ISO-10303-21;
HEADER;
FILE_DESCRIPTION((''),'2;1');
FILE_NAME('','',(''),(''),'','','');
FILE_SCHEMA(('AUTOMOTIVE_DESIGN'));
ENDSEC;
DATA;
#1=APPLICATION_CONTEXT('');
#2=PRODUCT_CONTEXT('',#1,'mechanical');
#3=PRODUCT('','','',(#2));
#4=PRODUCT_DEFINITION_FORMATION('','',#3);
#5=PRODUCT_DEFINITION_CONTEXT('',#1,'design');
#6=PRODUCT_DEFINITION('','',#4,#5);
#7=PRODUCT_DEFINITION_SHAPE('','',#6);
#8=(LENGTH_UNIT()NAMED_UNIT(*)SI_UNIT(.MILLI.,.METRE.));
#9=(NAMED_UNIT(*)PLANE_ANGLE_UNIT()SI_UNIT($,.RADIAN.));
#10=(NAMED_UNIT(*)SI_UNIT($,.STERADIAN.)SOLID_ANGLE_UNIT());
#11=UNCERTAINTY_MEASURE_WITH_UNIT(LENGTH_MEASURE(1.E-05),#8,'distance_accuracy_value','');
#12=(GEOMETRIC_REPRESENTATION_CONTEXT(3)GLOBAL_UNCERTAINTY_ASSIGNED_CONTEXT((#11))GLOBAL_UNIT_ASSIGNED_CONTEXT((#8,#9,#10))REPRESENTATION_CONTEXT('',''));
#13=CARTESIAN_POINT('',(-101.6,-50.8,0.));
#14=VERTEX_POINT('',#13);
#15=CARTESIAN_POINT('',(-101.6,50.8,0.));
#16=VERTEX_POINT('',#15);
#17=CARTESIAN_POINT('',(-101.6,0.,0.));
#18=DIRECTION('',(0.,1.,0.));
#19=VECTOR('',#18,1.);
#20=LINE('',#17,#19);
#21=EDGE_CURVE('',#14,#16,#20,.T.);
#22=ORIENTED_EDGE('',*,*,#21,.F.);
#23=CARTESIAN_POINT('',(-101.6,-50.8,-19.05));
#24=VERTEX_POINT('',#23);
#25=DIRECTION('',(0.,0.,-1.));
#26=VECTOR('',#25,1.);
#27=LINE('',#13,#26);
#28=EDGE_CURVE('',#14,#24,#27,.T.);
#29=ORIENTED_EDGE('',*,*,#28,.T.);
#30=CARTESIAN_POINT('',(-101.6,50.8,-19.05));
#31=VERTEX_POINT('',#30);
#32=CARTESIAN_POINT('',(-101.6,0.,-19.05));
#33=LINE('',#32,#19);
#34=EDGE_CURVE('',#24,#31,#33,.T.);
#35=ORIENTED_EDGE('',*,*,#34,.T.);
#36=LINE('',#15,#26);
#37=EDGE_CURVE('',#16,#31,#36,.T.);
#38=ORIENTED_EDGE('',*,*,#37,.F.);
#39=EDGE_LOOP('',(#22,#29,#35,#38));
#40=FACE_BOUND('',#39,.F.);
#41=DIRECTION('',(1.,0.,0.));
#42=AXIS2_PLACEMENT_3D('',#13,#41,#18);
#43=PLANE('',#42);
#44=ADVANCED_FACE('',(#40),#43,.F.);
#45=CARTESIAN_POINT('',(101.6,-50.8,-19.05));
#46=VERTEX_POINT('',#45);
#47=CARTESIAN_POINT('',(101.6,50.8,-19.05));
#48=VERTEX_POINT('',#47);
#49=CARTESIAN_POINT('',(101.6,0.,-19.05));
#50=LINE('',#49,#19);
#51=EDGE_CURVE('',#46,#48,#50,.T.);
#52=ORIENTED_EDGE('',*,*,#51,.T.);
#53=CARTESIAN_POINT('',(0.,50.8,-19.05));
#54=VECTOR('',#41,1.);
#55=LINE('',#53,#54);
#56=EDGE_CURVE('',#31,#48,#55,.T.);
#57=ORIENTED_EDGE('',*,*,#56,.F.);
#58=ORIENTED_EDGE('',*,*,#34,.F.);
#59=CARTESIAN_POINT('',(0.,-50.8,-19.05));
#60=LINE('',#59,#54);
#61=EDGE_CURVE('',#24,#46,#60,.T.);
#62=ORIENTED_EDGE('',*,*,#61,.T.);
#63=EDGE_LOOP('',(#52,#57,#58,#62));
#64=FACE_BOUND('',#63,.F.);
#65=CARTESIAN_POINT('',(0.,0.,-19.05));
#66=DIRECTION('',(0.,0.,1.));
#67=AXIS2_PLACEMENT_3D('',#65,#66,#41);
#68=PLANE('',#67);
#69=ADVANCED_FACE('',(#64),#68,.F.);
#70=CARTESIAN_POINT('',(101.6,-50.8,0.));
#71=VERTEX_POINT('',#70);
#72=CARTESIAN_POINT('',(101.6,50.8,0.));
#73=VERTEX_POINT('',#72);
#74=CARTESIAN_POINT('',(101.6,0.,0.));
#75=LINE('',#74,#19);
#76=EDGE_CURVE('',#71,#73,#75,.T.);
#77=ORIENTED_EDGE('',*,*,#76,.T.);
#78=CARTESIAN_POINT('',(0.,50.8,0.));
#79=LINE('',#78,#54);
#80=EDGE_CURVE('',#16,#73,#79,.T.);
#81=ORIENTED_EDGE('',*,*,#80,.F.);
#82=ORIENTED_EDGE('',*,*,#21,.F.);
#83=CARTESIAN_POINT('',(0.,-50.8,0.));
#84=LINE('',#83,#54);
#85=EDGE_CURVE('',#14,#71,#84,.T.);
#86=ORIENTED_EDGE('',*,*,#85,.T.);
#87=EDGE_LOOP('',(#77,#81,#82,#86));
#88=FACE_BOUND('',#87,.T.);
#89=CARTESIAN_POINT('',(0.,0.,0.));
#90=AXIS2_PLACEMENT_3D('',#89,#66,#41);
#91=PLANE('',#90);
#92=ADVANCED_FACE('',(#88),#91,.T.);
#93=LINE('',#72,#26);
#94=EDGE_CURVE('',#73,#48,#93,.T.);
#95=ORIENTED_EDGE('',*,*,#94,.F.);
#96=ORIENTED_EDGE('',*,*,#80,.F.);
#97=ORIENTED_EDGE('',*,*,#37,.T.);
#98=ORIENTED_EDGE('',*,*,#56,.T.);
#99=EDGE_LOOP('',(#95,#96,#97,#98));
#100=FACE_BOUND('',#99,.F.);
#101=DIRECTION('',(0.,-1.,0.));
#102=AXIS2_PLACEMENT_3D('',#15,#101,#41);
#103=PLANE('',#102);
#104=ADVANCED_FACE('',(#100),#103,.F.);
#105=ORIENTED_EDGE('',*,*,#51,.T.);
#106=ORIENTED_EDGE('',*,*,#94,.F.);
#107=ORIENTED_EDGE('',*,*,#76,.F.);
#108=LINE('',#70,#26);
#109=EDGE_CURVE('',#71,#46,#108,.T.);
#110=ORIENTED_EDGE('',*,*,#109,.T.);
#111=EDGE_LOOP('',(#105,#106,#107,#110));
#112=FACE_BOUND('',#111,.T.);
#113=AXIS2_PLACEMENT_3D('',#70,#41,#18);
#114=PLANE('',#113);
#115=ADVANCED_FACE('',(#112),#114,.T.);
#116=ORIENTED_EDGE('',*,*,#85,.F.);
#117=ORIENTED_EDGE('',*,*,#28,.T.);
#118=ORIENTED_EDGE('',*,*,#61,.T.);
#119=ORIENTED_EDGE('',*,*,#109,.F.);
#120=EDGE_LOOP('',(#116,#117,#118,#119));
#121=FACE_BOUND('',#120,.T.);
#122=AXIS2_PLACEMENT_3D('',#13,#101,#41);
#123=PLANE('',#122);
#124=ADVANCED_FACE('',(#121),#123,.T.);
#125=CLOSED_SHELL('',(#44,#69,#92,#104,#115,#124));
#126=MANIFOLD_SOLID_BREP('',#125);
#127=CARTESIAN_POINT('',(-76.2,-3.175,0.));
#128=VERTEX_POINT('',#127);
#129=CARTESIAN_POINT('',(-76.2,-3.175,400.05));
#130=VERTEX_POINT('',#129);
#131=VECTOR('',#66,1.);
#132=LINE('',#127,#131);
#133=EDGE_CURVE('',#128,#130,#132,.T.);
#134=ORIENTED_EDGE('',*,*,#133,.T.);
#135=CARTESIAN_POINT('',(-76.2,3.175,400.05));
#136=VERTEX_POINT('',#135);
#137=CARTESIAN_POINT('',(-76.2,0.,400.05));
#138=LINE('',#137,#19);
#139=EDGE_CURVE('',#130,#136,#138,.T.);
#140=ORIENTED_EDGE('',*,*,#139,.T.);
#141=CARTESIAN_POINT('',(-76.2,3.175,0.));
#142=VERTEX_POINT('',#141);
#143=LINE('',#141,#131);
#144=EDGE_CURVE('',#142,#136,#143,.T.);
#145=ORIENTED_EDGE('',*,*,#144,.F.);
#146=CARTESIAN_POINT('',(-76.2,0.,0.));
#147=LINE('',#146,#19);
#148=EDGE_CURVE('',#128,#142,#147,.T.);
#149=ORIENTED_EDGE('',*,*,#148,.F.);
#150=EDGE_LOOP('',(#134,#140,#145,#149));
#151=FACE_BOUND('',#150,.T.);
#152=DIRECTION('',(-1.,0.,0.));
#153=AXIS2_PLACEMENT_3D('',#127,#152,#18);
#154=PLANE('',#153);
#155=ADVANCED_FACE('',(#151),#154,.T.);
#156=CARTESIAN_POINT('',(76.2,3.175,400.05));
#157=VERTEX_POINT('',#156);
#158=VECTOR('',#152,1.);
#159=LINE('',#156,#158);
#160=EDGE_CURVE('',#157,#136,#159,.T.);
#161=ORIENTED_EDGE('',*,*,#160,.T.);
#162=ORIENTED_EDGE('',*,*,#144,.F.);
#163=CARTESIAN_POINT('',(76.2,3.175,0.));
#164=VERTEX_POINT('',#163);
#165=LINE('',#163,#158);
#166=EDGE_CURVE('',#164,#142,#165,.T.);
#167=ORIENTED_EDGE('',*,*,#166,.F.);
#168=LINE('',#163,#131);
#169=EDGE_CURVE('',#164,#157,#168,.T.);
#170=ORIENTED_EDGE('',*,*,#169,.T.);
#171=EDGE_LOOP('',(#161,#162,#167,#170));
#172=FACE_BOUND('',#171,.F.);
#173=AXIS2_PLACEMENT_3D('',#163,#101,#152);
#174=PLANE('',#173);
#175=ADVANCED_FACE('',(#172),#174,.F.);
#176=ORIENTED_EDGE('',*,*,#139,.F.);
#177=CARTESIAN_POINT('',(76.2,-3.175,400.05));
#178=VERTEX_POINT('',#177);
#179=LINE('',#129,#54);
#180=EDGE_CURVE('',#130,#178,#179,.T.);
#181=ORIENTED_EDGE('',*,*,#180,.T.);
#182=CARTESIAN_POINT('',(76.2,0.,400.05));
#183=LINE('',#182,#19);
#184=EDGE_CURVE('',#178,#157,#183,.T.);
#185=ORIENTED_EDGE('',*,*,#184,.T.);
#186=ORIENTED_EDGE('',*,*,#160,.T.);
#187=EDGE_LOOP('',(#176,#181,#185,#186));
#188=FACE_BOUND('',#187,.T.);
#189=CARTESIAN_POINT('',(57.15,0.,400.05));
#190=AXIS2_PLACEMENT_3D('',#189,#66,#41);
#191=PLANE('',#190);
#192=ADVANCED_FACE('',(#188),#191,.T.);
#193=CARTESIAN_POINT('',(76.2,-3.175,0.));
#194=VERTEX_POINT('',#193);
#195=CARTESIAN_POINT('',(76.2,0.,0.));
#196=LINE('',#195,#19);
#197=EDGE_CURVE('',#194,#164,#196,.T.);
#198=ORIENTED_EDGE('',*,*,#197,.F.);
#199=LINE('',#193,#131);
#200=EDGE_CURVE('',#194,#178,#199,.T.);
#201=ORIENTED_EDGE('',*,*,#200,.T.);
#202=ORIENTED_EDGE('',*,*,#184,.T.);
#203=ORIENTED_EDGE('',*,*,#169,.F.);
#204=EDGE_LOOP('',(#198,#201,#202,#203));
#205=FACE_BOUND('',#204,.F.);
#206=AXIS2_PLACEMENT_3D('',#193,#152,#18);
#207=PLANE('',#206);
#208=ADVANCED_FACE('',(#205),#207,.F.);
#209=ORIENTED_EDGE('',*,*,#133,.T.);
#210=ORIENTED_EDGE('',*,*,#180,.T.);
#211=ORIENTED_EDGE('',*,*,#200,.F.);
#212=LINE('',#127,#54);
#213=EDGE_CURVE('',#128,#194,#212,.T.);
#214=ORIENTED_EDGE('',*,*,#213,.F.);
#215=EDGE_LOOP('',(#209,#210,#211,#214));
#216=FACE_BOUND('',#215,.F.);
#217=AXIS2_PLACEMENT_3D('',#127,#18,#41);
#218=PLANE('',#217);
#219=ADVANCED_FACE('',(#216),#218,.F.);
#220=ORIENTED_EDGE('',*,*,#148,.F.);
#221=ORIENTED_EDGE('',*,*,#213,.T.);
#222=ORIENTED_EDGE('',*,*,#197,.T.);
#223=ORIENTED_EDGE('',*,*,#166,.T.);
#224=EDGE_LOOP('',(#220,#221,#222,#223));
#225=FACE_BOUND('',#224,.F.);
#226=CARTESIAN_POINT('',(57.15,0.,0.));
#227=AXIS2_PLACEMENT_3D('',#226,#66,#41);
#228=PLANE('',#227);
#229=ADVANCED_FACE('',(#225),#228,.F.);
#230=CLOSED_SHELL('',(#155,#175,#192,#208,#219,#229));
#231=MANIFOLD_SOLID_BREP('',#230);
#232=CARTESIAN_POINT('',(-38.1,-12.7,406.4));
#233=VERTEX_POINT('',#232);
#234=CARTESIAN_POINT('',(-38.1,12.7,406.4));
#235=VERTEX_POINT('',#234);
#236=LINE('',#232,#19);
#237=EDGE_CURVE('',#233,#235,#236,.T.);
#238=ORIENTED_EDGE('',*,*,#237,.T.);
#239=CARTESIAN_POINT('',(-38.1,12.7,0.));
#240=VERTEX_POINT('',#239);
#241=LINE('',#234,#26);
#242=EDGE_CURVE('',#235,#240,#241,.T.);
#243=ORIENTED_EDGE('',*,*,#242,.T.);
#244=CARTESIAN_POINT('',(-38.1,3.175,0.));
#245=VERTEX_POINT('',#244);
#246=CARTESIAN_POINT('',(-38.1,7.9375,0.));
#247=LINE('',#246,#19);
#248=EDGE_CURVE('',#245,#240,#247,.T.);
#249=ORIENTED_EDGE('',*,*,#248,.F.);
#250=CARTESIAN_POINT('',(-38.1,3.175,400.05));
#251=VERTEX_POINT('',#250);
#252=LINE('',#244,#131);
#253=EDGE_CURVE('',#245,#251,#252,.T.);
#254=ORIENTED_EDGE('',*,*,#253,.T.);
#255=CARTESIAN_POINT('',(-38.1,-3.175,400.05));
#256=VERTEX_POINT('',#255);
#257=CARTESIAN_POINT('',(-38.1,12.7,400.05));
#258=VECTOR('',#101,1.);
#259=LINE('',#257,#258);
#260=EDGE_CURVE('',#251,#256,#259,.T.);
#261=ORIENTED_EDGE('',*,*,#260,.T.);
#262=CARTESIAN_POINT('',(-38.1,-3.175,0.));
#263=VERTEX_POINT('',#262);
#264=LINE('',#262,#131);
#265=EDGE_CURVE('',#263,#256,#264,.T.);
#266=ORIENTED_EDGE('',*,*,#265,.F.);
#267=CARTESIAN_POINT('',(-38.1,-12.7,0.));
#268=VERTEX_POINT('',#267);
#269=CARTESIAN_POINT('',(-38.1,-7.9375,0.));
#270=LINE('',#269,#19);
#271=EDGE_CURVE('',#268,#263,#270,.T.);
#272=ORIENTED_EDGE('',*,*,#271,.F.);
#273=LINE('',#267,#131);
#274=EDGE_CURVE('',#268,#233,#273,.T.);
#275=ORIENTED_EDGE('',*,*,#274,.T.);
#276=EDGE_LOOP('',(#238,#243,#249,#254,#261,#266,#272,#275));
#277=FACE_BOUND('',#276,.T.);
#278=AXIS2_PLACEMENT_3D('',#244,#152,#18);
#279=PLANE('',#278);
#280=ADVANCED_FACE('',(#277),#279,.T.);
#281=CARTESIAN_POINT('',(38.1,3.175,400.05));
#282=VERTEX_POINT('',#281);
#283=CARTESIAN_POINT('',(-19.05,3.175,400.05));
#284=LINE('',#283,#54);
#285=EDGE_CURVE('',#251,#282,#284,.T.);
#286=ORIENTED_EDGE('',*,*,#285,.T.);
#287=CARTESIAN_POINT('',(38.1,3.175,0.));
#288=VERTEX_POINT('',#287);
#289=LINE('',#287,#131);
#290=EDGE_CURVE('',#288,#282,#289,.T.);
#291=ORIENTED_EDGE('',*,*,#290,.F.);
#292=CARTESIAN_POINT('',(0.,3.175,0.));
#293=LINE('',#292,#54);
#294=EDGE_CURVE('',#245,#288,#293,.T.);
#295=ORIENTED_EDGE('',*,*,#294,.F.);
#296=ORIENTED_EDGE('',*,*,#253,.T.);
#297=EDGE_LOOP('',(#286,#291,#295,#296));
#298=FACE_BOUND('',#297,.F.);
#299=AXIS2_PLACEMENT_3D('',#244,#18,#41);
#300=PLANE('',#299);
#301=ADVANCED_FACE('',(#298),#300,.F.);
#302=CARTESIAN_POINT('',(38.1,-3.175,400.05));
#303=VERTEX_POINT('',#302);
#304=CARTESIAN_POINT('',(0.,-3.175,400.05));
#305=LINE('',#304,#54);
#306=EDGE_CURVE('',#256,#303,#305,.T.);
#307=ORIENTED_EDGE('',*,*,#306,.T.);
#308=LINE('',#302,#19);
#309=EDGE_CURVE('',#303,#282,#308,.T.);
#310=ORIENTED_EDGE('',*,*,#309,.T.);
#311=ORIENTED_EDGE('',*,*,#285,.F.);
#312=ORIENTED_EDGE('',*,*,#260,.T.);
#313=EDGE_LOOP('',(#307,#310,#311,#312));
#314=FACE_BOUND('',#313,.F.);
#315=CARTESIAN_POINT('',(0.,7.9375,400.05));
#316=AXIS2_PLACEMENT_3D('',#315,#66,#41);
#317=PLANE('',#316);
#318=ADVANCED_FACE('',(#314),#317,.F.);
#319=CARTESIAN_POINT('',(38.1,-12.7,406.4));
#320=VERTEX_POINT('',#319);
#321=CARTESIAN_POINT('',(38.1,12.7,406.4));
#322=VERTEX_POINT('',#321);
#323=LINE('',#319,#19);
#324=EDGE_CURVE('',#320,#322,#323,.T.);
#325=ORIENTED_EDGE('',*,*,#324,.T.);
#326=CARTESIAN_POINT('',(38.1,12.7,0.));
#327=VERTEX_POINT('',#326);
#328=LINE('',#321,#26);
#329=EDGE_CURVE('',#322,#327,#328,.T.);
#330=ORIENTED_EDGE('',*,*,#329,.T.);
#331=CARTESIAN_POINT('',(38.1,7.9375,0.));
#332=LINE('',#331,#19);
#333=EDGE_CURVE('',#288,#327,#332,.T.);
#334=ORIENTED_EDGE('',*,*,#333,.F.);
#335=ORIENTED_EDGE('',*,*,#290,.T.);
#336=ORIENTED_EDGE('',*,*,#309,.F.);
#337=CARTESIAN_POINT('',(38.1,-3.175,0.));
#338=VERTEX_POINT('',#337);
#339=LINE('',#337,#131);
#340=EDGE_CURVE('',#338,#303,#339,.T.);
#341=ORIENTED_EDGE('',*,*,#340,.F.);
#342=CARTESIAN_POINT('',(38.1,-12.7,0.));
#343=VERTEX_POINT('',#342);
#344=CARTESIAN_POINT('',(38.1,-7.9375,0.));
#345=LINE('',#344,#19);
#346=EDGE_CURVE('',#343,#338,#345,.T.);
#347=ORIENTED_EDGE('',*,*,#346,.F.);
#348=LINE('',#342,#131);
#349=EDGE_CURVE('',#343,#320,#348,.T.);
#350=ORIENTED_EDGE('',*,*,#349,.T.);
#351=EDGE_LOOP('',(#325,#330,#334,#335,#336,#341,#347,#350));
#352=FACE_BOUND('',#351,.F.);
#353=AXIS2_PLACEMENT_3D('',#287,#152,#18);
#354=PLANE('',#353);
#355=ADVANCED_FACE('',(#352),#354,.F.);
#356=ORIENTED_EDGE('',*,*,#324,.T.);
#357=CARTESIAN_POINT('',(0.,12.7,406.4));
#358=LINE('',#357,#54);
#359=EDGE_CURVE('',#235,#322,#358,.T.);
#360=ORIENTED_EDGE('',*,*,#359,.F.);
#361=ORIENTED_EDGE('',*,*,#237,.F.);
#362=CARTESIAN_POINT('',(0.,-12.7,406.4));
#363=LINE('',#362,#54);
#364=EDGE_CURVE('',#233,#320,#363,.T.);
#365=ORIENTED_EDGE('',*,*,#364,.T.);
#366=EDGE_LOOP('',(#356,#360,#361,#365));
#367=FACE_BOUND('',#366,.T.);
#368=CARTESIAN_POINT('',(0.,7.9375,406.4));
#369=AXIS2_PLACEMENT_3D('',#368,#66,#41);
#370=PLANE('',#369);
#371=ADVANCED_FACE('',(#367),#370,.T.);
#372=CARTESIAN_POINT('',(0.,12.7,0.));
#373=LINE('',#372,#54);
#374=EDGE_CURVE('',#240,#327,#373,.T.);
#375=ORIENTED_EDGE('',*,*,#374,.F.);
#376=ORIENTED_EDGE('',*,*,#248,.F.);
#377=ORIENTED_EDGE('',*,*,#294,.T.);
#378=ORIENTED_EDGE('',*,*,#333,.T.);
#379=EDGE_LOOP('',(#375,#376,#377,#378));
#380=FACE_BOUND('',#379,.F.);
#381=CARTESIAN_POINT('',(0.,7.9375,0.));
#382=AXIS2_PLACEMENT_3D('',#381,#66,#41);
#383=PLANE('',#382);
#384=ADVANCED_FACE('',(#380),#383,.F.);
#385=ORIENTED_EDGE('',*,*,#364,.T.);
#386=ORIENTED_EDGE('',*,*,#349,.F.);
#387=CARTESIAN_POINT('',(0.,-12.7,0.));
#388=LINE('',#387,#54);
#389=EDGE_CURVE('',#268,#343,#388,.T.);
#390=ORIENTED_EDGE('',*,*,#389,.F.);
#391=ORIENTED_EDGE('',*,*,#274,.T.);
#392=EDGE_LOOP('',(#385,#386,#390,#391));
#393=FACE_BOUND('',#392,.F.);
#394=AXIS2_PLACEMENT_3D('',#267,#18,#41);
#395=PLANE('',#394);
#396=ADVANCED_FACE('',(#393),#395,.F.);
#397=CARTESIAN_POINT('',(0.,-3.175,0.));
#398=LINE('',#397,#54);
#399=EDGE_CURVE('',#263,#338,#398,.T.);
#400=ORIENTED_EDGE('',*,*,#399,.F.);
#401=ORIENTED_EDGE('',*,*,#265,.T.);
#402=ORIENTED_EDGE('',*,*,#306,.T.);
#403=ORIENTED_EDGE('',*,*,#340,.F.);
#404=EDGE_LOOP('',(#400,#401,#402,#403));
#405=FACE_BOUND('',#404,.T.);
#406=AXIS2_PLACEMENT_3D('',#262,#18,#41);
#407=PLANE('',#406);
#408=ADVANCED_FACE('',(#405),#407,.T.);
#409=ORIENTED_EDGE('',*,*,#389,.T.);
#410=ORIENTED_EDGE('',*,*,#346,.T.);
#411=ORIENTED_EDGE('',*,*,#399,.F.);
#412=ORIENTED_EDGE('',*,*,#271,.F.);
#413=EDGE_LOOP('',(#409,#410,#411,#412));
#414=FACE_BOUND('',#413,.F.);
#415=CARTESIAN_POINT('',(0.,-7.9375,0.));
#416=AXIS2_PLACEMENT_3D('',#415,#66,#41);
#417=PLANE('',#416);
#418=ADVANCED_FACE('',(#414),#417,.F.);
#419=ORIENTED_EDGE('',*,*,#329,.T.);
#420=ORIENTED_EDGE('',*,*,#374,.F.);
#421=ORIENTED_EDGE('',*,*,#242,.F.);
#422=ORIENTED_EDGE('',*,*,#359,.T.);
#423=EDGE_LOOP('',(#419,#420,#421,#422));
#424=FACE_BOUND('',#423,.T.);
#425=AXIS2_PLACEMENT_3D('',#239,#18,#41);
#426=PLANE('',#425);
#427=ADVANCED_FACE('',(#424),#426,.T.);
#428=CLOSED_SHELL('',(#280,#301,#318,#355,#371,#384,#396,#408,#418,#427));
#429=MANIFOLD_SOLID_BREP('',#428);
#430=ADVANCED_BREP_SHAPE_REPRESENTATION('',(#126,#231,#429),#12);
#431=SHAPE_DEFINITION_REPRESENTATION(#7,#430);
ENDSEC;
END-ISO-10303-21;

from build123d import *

# Parameters (mm, degrees)
F0_W     = 203.2
F0_H     = 101.6
F0_W_2   = 76.2
F0_H_2   = 9.525
F0_W_3   = 38.1
F0_H_3   = 6.35
F1_DEPTH = 19.05
F2_DEPTH = 406.4
F3_DEPTH = 400.05
F4_W     = 76.2
F4_H     = 9.525
F4_H_2   = 6.35
F5_DEPTH = 6.35


with BuildPart() as f1:
    # F0 (on Top) → F1 (new body)
    with BuildSketch(Plane.XY):
        Rectangle(F0_W, F0_H)
        Polygon((-38.1, 12.7), (38.1, 12.7), (38.1, 3.175), (76.2, 3.175), (76.2, -3.175), (38.1, -3.175), (38.1, -12.7), (-38.1, -12.7), (-38.1, -3.175), (-76.2, -3.175), (-76.2, 3.175), (-38.1, 3.175), align=None, mode=Mode.SUBTRACT)
        with Locations((0, 7.9375)):
            Rectangle(F0_W_2, F0_H_2)
        with Locations((57.15, 0)):
            Rectangle(F0_W_3, F0_H_3)
        Rectangle(F0_W_2, F0_H_3)
        with Locations((0, -7.9375)):
            Rectangle(F0_W_2, F0_H_2)
        with Locations((-57.15, 0)):
            Rectangle(F0_W_3, F0_H_3)
    extrude(amount=-F1_DEPTH)


with BuildPart() as f2:
    # F0 (on Top) → F2 (new body)
    with BuildSketch(Plane.XY):
        with Locations((0, 7.9375)):
            Rectangle(F0_W_2, F0_H_2)
    extrude(amount=F2_DEPTH)



with BuildPart() as f2b:
    # F0 (on Top) → F2, piece 2 (new body)
    with BuildSketch(Plane.XY):
        with Locations((0, -7.9375)):
            Rectangle(F0_W_2, F0_H_2)
    extrude(amount=F2_DEPTH)


with BuildPart() as f3:
    # F0 (on Top) → F3 (new body)
    with BuildSketch(Plane.XY):
        with Locations((57.15, 0)):
            Rectangle(F0_W_3, F0_H_3)
        Rectangle(F0_W_2, F0_H_3)
        with Locations((-57.15, 0)):
            Rectangle(F0_W_3, F0_H_3)
    extrude(amount=F3_DEPTH)


with BuildPart() as f2_1:
    add(f2.part)

    add(f2b.part)  # F5 merges F2b
    # F4 (on face) → F5 (join)
    with BuildSketch(Plane.XY.offset(406.4)):
        with Locations((0, 7.9375)):
            Rectangle(F4_W, F4_H)
        Rectangle(F4_W, F4_H_2)
    extrude(amount=-F5_DEPTH)


solid = Compound([f1.part, f3.part, f2_1.part])
